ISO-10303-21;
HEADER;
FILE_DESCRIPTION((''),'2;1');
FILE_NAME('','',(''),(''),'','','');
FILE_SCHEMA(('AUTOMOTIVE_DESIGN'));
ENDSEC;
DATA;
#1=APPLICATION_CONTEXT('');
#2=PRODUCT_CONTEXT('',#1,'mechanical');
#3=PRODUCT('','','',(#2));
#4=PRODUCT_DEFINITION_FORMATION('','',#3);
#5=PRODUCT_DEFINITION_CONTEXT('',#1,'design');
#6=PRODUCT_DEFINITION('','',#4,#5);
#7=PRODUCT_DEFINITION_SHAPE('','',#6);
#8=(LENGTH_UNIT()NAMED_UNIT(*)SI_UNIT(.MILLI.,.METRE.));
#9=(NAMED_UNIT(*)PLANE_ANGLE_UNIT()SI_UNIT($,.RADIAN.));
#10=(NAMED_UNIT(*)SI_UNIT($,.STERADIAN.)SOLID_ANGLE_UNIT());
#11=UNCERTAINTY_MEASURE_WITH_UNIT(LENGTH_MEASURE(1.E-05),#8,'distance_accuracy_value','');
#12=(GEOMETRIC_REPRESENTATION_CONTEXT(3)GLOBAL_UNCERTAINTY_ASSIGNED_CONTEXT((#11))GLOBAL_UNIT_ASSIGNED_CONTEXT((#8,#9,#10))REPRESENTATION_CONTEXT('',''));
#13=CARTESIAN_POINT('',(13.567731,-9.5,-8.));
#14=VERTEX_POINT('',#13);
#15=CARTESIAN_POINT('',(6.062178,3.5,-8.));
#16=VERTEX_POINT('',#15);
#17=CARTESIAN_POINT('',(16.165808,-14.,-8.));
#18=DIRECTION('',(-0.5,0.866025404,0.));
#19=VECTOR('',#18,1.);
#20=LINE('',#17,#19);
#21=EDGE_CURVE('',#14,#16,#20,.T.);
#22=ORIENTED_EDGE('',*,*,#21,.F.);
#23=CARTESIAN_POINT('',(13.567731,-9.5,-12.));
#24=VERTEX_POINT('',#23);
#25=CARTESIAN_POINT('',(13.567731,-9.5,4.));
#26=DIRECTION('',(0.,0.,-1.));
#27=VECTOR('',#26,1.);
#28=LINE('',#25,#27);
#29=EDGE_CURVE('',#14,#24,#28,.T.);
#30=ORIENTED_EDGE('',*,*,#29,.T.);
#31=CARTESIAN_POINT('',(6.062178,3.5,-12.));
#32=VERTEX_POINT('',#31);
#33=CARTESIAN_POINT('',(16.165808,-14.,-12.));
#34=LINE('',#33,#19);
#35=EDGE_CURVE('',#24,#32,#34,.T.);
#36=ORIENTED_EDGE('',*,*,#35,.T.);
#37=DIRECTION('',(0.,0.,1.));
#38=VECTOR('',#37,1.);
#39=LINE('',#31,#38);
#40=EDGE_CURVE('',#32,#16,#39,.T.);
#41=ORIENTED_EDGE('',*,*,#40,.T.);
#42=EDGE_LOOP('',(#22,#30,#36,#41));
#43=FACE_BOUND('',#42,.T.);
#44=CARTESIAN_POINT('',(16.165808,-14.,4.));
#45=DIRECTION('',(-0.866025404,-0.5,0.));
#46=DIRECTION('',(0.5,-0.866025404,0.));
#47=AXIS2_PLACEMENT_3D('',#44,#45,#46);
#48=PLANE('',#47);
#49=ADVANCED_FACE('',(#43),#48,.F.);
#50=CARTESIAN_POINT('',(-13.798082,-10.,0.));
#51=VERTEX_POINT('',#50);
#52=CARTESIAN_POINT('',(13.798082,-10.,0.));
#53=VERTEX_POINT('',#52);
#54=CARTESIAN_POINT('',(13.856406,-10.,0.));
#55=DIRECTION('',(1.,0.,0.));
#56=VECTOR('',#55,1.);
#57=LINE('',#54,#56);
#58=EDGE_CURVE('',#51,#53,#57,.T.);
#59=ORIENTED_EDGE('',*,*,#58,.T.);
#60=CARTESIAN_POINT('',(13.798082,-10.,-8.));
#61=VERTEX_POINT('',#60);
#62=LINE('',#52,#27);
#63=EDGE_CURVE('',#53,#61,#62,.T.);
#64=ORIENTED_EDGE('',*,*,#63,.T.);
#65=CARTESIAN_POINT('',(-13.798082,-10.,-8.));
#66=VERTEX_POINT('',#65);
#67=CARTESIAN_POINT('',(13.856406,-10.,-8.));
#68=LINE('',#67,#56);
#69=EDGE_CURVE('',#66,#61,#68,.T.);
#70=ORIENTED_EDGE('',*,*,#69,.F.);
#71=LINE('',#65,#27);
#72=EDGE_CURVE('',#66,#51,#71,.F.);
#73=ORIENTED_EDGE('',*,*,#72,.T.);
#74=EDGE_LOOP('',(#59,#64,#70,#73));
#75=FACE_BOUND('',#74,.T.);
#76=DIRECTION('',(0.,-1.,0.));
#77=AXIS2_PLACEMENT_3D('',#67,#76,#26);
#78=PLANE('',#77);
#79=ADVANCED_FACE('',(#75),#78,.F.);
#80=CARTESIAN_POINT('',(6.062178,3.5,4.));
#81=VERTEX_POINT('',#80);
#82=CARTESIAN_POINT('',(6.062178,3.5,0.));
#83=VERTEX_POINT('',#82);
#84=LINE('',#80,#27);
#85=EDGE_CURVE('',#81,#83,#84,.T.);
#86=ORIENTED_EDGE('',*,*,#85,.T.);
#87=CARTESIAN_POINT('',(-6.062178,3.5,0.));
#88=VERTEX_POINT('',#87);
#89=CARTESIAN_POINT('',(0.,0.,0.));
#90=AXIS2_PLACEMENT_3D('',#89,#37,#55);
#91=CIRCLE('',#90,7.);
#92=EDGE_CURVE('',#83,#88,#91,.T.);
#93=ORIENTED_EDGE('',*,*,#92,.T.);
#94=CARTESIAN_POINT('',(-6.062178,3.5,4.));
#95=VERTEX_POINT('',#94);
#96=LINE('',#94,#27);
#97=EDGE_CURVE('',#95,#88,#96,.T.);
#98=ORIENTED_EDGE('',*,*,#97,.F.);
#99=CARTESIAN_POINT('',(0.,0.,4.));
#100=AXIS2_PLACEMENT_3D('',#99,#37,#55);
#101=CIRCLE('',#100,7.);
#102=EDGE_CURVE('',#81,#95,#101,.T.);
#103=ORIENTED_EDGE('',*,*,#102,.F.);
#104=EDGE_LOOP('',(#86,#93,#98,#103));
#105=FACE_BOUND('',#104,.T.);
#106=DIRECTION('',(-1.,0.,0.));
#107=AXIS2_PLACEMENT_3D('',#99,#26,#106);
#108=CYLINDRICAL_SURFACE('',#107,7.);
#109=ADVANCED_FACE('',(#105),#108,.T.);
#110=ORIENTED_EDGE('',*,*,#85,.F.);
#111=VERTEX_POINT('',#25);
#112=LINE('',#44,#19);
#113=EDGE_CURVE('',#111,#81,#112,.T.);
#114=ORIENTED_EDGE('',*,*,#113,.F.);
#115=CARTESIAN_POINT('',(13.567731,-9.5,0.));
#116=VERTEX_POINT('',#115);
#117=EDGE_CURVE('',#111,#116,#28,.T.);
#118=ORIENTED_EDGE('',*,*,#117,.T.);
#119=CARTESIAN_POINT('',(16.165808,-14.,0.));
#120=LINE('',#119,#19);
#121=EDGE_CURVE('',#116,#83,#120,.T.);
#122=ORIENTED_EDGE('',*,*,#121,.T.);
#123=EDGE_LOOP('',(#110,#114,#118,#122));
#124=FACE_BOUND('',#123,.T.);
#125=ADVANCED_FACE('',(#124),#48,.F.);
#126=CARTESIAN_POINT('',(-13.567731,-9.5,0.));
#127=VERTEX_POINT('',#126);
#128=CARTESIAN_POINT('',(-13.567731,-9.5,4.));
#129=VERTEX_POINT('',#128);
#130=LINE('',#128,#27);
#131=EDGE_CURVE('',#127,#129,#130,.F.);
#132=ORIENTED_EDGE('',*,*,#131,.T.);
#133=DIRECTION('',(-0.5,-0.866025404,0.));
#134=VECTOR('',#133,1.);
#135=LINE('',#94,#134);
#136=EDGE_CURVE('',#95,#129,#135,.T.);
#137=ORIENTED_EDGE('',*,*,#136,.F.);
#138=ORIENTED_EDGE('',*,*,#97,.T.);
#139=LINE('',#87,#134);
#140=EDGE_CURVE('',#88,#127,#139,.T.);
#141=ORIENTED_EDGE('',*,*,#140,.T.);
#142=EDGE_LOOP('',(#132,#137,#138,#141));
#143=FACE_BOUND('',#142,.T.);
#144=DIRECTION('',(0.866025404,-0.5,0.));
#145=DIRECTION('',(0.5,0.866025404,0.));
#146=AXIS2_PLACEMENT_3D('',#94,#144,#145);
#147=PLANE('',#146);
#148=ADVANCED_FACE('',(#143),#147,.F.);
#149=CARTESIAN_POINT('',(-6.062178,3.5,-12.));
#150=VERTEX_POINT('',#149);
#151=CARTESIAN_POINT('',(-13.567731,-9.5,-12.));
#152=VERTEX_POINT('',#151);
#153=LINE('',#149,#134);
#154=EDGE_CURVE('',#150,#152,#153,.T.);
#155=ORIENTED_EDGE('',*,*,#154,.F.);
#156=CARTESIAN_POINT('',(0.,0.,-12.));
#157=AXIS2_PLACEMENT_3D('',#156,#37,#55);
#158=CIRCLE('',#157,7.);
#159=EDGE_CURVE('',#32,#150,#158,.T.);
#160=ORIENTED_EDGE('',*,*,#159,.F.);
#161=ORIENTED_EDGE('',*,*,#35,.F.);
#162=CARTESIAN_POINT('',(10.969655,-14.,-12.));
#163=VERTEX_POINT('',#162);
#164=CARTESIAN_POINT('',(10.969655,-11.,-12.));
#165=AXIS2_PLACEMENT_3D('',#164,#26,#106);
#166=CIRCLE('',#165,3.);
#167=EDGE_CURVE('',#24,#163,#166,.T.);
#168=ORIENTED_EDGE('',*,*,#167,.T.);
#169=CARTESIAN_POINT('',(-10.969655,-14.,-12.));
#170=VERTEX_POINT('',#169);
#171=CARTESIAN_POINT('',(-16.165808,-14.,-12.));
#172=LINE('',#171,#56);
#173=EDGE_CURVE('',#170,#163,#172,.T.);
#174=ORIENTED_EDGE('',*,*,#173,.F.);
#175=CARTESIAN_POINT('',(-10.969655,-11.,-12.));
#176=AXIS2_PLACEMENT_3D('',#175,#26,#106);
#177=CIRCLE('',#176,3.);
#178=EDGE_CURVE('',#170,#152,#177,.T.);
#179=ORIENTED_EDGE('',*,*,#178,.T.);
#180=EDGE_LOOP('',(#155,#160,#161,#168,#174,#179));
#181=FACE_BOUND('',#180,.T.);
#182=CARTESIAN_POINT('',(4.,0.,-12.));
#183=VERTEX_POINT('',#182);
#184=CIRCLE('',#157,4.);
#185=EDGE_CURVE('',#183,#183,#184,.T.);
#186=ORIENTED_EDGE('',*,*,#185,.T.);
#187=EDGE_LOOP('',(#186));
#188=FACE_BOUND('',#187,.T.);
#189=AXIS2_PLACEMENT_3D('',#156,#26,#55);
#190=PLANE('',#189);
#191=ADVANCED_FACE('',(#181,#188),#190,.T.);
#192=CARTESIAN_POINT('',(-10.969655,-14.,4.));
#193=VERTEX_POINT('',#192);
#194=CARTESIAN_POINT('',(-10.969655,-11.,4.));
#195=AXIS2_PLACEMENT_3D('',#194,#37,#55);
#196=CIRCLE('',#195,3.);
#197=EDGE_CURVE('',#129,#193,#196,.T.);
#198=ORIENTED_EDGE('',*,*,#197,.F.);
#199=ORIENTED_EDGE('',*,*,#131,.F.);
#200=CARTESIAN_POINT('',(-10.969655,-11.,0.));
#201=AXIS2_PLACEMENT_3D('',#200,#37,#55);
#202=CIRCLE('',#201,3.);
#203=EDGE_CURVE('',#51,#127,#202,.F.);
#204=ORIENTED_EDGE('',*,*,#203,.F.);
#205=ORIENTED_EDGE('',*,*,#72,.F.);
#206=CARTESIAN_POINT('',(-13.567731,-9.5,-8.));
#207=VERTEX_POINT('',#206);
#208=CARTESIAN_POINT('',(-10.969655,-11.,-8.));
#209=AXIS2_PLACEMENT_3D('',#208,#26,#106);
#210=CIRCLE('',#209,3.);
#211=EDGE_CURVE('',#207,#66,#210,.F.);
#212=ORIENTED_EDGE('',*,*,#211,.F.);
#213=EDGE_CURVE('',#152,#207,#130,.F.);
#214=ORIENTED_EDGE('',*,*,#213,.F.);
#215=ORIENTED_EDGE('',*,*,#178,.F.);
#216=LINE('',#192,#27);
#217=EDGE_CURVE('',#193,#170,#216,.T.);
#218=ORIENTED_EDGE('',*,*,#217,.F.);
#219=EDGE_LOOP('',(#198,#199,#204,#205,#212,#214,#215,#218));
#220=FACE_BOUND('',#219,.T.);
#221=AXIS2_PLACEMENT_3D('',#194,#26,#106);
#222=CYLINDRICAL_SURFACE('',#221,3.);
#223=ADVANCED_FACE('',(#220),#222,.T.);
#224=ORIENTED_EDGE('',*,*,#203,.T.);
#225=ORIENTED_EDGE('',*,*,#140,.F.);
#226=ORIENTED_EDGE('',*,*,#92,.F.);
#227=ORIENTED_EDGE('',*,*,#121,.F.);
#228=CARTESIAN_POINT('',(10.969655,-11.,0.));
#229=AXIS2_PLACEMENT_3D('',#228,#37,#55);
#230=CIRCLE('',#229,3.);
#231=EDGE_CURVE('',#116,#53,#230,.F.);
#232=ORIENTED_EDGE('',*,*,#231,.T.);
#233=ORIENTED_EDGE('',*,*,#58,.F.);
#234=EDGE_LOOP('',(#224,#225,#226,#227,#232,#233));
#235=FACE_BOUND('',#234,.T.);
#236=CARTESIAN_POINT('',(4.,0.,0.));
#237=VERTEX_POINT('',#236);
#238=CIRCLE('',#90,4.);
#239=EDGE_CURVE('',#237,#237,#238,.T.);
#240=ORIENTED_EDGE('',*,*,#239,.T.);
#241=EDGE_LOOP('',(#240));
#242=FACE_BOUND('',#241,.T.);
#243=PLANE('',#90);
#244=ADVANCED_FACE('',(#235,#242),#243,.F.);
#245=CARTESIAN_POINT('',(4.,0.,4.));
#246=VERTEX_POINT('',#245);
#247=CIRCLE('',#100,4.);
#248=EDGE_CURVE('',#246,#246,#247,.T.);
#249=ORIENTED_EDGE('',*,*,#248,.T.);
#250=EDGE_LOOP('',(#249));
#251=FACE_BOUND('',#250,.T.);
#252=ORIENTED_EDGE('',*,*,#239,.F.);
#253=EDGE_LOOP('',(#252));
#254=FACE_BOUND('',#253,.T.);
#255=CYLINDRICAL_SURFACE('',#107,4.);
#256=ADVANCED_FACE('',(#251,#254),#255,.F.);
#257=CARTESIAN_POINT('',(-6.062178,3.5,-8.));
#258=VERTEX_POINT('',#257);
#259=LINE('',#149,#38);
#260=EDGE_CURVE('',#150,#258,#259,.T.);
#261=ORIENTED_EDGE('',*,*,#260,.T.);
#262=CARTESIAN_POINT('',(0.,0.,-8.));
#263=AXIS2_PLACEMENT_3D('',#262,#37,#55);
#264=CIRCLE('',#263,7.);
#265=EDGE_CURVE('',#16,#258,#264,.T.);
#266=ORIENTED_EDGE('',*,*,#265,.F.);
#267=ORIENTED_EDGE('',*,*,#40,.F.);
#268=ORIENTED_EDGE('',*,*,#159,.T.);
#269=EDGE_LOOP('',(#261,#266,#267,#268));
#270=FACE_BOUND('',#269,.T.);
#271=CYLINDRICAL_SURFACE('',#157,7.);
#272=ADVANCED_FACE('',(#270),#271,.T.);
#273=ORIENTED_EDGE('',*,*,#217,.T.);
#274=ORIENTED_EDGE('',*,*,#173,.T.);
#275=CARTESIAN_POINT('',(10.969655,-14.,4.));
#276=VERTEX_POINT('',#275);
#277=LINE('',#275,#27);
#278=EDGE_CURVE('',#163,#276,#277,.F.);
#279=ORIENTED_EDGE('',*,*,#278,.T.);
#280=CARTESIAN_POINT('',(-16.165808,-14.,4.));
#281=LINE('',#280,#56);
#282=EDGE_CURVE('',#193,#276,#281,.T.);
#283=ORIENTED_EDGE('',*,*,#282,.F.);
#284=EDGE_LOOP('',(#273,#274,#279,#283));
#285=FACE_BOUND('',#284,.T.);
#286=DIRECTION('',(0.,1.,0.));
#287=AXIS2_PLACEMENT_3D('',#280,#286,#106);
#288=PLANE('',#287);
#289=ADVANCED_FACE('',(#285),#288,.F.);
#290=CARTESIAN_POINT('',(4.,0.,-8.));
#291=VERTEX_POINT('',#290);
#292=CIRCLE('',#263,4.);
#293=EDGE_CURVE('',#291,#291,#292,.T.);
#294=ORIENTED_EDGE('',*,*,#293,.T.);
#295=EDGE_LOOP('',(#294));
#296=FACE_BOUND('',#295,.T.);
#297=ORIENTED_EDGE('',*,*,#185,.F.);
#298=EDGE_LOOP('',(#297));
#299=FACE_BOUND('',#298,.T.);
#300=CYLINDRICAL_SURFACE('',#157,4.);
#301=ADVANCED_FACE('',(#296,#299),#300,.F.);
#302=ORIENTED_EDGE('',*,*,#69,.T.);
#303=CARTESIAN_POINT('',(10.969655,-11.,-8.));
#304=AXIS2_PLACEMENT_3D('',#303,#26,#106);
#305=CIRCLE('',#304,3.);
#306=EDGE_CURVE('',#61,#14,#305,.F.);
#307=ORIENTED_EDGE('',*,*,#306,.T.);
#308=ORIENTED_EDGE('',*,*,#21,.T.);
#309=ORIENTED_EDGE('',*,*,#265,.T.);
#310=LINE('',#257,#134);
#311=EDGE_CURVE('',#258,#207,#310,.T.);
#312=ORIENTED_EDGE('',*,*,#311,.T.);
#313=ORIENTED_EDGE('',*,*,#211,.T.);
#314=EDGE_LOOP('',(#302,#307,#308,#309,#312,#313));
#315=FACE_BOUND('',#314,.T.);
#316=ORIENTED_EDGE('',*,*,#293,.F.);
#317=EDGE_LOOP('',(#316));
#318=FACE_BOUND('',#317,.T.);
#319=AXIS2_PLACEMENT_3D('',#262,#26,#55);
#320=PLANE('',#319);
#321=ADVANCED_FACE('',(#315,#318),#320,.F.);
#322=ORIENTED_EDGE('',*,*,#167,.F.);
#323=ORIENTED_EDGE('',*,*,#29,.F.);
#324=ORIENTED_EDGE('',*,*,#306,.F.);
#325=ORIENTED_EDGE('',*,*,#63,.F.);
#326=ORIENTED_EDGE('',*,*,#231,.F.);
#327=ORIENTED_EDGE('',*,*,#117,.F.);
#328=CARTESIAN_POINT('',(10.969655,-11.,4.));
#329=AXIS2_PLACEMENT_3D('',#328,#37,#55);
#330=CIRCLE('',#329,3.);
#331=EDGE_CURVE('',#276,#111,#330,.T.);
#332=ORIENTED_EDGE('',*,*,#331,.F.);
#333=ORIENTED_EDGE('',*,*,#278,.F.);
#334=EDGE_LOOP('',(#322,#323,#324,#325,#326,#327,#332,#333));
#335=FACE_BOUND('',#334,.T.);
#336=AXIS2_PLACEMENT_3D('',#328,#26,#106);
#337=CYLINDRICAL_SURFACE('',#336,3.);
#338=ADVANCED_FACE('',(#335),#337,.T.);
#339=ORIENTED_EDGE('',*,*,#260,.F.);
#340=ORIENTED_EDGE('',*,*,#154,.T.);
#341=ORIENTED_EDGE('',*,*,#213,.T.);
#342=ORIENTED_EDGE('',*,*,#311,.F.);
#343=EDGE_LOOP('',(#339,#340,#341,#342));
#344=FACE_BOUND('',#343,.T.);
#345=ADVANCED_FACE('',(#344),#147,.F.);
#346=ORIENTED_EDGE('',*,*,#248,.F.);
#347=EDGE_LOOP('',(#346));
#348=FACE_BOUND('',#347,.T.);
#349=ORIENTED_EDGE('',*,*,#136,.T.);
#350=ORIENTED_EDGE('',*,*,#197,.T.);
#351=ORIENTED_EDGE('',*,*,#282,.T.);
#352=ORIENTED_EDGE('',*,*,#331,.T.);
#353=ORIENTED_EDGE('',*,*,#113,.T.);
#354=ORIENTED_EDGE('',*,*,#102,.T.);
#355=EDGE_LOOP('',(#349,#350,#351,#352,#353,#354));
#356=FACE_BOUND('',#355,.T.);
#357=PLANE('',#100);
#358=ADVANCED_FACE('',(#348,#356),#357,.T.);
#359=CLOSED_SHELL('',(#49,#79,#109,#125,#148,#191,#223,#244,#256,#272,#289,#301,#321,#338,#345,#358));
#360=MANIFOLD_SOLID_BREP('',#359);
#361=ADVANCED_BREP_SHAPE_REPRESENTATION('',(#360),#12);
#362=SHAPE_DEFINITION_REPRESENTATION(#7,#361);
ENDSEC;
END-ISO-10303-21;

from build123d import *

# Parameters (mm, degrees)
SKETCH1_R           = 4
MAINBODY_DEPTH      = 4
BOSS_EXTRUDE2_DEPTH = 8
FILLET1_R           = 3


with BuildPart() as part:
    # Sketch1 → MainBody (new body)
    with BuildSketch(Plane.XY):
        with BuildLine():
            Line((-6.062177826, 3.5), (-16.165807537, -14))
            Line((-16.165807537, -14), (16.165807537, -14))
            Line((16.165807537, -14), (6.062177826, 3.5))
            ThreePointArc((6.062177826, 3.5), (0, 7), (-6.062177826, 3.5))
        make_face()
        Circle(SKETCH1_R, mode=Mode.SUBTRACT)
    mainbody = extrude(amount=MAINBODY_DEPTH)

    # Sketch3 → Boss-Extrude2 (add)
    with BuildSketch(Plane(origin=(0, 0, 0), x_dir=(-1, 0, 0), z_dir=(0, 0, -1))):
        Polygon((-16.165807537, -14), (-13.856406461, -10), (13.856406461, -10), (16.165807537, -14), align=None)
    extrude(amount=BOSS_EXTRUDE2_DEPTH)

    # Mirror2: MainBody across plane
    add(mainbody.mirror(Plane(origin=(0, 0, -4), x_dir=(1, 0, 0), z_dir=(0, 0, -1))))

    # Fillet1
    # the kernel refuses this fillet: 3 mm, written as the material it takes off along each edge
    with BuildSketch(Plane(origin=(-16.165807537, -14, -24.990381057), x_dir=(1, 0, 0), z_dir=(0, 0, 1)), Plane(origin=(16.165807537, -14, 16.990381057), x_dir=(-1, 0, 0), z_dir=(0, 0, -1))) as fillet1_piece_1:
        with BuildLine():
            CenterArc((FILLET1_R * 1.73205080757, FILLET1_R), FILLET1_R, 150, 120)
            Line((FILLET1_R * 0.866025403784, FILLET1_R * 1.5), (0, 0))
            Line((0, 0), (FILLET1_R * 1.73205080757, 0))
        make_face()
    extrude(amount=41.980762114, mode=Mode.SUBTRACT)


solid = part.part
